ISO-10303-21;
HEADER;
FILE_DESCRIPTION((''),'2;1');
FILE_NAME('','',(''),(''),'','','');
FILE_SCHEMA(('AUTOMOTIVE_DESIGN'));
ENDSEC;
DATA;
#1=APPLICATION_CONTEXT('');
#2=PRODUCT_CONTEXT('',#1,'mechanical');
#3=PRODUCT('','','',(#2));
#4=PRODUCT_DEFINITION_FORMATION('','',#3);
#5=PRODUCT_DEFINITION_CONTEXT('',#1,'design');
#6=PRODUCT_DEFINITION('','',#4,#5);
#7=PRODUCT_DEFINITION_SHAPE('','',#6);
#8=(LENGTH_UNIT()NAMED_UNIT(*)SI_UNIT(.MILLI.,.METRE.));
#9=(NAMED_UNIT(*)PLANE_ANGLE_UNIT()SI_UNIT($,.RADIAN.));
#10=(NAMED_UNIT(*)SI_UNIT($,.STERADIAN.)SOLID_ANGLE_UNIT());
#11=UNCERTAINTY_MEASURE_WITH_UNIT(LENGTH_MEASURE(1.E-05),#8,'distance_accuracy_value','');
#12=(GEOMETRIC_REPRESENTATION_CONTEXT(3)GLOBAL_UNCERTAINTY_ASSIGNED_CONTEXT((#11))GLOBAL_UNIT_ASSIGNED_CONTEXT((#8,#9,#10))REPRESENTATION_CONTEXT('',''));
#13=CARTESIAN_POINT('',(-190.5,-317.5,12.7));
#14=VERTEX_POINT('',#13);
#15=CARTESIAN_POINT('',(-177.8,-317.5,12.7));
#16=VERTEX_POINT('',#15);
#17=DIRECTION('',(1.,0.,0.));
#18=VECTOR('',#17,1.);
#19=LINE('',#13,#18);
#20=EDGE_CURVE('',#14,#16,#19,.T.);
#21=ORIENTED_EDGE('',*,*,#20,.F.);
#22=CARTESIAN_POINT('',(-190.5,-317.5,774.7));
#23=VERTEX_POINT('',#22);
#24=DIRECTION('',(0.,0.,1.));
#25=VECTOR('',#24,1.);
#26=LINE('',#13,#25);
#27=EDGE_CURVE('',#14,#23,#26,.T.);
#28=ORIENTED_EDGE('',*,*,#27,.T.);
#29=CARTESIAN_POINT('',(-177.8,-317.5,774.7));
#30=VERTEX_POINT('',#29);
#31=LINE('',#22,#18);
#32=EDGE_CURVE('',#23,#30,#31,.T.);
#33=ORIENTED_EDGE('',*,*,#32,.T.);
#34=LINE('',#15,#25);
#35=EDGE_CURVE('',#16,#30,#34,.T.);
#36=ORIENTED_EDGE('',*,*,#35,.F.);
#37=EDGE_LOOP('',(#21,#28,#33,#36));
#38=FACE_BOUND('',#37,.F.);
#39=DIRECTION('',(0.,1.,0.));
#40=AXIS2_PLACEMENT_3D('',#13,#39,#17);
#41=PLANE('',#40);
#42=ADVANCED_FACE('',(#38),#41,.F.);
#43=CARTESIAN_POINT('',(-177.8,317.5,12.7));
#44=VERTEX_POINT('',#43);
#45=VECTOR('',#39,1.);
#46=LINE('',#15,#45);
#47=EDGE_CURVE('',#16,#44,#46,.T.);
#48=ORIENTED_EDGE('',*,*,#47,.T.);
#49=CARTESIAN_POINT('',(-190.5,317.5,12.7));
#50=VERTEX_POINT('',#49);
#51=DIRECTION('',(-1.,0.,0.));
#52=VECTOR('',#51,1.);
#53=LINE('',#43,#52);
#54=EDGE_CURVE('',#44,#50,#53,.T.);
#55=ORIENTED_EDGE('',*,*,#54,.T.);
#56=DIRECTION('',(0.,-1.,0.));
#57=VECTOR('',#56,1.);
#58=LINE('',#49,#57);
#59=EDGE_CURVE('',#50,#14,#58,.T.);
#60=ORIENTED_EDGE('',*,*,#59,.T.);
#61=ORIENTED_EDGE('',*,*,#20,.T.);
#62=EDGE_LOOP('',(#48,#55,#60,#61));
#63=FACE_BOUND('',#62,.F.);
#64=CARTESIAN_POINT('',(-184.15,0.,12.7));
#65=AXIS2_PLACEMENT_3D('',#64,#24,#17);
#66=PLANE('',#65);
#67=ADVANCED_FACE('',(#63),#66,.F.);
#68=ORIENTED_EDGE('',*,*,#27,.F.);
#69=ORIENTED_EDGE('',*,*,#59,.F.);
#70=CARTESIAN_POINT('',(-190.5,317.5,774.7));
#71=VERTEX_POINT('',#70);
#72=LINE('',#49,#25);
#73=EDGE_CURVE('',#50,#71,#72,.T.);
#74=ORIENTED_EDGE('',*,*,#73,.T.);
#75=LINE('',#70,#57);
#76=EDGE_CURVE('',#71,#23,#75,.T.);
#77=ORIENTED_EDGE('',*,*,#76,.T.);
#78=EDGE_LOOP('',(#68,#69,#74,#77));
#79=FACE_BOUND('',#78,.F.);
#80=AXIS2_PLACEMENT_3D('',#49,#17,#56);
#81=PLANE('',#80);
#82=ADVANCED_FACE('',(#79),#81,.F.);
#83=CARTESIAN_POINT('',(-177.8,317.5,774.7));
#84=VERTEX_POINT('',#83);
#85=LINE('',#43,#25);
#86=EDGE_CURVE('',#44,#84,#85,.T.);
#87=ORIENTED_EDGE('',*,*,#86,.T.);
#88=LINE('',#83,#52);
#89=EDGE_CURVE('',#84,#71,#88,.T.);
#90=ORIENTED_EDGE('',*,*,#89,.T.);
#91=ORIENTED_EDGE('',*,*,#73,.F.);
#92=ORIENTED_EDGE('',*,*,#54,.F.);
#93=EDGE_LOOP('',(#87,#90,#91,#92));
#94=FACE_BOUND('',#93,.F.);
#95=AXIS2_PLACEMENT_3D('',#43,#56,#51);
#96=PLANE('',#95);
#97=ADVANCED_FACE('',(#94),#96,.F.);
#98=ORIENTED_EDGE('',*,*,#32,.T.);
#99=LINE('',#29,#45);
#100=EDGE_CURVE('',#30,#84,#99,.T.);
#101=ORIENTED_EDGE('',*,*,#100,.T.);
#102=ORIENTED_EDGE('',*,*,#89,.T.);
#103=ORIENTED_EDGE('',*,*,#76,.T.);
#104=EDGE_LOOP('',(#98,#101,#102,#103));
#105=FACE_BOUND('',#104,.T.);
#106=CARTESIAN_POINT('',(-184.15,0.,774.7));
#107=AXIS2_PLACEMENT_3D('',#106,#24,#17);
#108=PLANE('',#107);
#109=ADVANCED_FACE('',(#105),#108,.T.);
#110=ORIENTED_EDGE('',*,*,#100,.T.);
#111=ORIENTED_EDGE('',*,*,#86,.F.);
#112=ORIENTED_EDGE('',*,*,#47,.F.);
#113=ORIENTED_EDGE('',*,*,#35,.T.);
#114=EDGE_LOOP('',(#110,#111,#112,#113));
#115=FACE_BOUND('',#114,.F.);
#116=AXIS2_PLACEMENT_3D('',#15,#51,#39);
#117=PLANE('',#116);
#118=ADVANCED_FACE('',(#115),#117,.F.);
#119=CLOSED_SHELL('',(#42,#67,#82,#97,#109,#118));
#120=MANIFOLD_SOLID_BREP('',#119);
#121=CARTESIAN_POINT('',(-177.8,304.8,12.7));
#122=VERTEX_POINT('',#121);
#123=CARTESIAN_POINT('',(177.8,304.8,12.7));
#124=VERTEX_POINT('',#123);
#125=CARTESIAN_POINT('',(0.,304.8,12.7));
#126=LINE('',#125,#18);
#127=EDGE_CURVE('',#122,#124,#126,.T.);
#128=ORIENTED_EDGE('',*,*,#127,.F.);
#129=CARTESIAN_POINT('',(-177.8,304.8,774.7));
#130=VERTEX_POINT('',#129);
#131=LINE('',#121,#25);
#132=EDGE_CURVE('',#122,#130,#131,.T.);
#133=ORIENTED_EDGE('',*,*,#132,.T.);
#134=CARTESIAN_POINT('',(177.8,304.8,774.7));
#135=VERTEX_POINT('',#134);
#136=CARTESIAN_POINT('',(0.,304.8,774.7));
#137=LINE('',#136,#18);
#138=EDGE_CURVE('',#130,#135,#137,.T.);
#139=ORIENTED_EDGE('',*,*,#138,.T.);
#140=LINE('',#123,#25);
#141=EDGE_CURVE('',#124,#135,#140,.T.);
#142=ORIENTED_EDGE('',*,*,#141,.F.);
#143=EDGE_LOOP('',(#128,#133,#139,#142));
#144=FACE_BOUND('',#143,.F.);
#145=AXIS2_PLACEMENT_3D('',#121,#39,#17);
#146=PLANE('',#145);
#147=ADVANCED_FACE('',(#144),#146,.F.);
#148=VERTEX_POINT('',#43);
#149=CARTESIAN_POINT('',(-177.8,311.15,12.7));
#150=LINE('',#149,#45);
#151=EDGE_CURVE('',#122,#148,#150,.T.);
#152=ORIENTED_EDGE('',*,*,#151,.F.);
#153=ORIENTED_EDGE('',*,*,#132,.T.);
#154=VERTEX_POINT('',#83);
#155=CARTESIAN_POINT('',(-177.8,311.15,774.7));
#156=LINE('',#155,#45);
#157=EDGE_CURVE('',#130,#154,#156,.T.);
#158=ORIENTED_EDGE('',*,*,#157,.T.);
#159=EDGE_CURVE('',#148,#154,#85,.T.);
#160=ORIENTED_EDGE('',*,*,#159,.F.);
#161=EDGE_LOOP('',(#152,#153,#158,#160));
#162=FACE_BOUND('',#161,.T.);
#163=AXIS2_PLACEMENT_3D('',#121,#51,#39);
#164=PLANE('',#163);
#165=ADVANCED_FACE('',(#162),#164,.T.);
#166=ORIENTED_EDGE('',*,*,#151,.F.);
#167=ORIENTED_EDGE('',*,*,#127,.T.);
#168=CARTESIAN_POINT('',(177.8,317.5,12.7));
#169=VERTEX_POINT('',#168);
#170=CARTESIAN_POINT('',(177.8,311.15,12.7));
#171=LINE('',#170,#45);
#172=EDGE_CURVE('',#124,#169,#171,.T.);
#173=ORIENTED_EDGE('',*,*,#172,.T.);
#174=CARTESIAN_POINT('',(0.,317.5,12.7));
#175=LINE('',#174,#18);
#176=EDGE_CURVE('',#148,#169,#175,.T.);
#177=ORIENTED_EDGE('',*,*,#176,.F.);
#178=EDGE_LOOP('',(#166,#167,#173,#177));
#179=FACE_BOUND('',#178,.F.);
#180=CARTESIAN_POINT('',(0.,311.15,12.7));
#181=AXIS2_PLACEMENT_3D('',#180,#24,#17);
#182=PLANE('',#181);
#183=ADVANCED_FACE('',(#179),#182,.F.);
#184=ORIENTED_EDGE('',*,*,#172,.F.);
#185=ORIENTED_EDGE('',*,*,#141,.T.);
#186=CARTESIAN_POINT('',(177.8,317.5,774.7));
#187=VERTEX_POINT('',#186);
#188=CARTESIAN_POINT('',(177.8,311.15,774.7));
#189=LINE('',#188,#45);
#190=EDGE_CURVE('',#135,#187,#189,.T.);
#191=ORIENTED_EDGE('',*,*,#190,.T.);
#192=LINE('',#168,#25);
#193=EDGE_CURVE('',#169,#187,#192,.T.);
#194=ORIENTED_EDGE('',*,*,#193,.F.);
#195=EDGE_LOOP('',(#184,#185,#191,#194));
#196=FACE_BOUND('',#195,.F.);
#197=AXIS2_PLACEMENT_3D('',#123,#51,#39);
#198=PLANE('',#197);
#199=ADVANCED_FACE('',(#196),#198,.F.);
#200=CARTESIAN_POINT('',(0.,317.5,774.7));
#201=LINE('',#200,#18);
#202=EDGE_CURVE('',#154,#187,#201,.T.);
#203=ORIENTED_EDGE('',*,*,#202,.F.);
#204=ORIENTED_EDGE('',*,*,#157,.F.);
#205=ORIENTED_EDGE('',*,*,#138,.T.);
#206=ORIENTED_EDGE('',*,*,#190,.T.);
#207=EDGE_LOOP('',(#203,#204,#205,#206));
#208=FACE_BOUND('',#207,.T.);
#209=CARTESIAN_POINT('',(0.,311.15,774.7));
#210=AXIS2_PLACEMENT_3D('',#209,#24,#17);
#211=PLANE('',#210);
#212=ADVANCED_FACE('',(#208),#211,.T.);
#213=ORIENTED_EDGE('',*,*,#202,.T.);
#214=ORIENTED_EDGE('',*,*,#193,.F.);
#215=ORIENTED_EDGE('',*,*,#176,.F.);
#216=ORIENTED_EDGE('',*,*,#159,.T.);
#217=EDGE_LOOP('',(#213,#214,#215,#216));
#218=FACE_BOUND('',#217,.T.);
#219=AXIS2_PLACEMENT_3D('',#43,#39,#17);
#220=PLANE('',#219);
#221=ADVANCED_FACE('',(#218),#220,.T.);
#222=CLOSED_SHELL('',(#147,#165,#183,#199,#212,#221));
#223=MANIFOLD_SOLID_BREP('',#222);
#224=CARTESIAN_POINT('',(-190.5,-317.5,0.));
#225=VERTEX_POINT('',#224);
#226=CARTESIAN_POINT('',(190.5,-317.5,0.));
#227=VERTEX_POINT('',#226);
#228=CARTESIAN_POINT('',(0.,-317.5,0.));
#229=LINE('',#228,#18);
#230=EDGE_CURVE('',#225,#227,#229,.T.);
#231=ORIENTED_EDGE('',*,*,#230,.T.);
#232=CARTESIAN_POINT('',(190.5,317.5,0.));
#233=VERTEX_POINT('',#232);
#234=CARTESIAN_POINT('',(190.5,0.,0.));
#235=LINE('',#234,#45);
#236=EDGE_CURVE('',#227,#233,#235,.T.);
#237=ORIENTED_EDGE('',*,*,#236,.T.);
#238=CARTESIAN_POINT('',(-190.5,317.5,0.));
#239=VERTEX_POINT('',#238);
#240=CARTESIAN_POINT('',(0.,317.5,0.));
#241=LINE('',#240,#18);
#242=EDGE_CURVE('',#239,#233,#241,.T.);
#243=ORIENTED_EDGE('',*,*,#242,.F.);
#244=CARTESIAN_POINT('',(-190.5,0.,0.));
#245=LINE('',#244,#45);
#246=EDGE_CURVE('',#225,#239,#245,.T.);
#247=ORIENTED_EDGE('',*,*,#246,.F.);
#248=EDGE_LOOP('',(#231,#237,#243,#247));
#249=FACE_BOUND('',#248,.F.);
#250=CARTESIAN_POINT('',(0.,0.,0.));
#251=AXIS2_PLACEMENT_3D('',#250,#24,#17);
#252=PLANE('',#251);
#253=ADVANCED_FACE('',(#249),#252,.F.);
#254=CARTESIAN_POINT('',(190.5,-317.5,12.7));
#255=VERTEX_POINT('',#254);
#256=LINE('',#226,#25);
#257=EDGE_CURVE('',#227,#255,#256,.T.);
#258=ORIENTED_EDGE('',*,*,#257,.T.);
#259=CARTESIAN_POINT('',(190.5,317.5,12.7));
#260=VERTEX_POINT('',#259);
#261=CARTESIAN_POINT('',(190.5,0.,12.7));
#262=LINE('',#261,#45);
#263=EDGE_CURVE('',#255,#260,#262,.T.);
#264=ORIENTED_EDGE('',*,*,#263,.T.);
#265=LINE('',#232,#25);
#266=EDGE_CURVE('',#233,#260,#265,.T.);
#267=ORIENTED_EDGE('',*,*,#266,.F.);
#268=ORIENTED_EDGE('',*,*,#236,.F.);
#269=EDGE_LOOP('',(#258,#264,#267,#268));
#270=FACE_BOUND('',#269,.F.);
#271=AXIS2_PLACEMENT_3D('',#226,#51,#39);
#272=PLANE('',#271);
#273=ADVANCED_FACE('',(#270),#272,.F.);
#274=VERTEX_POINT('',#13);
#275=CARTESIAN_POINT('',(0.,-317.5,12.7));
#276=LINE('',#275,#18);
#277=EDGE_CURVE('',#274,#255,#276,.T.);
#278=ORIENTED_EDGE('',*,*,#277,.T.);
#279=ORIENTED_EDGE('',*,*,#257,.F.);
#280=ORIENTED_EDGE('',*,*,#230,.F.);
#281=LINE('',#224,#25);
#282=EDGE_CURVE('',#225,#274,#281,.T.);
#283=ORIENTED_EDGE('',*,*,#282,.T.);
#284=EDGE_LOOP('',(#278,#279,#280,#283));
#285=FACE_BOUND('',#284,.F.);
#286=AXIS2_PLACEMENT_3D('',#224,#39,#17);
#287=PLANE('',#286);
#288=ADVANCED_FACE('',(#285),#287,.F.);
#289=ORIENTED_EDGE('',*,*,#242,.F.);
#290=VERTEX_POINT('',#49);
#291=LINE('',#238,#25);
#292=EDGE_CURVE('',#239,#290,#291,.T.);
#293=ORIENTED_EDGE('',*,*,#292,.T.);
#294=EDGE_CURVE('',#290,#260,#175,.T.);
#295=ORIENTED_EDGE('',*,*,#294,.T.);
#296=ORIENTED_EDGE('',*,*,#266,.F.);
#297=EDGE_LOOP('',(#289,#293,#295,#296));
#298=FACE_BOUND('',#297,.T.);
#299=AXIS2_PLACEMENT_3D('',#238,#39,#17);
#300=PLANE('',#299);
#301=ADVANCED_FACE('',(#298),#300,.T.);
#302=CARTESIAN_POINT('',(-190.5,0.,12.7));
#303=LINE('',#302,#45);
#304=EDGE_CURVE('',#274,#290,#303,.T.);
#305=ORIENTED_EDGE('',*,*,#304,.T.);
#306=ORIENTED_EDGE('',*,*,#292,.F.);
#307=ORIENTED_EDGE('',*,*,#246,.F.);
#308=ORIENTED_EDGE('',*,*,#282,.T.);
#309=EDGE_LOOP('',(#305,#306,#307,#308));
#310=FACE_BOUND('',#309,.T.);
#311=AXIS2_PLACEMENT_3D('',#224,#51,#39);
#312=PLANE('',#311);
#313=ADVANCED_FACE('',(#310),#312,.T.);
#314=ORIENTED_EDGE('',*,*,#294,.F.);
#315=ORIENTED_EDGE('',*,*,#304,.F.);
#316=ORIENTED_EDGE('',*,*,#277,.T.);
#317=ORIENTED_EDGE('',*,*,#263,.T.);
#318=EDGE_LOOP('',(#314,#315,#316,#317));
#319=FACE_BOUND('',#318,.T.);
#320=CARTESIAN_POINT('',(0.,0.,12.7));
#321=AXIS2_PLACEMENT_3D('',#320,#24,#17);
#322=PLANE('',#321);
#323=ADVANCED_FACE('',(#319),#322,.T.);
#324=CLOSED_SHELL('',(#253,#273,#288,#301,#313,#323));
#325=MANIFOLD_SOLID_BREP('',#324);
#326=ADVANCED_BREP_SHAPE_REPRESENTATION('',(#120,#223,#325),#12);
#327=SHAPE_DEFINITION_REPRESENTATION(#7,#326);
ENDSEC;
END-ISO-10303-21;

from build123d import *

# Parameters (mm, degrees)
F0_W     = 381
F0_H     = 635
F3_DEPTH = 12.7
F5_DEPTH = 762
F4_W     = 355.6
F4_H     = 12.7
F6_DEPTH = 762


# Not quite as in the source:
# - a variable given as a bare number and used for a length is read in inches; the dataset says mm whatever the document's units were


with BuildPart() as f3:
    # F0 (on Top) → F3 (new body)
    with BuildSketch(Plane.XY):
        Rectangle(F0_W, F0_H)
    extrude(amount=F3_DEPTH)


with BuildPart() as f5:
    # F4 (on face) → F5 (new body)
    with BuildSketch(Plane.XY.offset(12.7)):
        Polygon((-190.5, 317.5), (-190.5, -317.5), (-177.8, -317.5), (-177.8, 304.8), (-177.8, 317.5), align=None)
    extrude(amount=F5_DEPTH)


with BuildPart() as f6:
    # F4 (on face) → F6 (new body)
    with BuildSketch(Plane.XY.offset(12.7)):
        with Locations((0, 311.15)):
            Rectangle(F4_W, F4_H)
    extrude(amount=F6_DEPTH)


solid = Compound([f3.part, f5.part, f6.part])
